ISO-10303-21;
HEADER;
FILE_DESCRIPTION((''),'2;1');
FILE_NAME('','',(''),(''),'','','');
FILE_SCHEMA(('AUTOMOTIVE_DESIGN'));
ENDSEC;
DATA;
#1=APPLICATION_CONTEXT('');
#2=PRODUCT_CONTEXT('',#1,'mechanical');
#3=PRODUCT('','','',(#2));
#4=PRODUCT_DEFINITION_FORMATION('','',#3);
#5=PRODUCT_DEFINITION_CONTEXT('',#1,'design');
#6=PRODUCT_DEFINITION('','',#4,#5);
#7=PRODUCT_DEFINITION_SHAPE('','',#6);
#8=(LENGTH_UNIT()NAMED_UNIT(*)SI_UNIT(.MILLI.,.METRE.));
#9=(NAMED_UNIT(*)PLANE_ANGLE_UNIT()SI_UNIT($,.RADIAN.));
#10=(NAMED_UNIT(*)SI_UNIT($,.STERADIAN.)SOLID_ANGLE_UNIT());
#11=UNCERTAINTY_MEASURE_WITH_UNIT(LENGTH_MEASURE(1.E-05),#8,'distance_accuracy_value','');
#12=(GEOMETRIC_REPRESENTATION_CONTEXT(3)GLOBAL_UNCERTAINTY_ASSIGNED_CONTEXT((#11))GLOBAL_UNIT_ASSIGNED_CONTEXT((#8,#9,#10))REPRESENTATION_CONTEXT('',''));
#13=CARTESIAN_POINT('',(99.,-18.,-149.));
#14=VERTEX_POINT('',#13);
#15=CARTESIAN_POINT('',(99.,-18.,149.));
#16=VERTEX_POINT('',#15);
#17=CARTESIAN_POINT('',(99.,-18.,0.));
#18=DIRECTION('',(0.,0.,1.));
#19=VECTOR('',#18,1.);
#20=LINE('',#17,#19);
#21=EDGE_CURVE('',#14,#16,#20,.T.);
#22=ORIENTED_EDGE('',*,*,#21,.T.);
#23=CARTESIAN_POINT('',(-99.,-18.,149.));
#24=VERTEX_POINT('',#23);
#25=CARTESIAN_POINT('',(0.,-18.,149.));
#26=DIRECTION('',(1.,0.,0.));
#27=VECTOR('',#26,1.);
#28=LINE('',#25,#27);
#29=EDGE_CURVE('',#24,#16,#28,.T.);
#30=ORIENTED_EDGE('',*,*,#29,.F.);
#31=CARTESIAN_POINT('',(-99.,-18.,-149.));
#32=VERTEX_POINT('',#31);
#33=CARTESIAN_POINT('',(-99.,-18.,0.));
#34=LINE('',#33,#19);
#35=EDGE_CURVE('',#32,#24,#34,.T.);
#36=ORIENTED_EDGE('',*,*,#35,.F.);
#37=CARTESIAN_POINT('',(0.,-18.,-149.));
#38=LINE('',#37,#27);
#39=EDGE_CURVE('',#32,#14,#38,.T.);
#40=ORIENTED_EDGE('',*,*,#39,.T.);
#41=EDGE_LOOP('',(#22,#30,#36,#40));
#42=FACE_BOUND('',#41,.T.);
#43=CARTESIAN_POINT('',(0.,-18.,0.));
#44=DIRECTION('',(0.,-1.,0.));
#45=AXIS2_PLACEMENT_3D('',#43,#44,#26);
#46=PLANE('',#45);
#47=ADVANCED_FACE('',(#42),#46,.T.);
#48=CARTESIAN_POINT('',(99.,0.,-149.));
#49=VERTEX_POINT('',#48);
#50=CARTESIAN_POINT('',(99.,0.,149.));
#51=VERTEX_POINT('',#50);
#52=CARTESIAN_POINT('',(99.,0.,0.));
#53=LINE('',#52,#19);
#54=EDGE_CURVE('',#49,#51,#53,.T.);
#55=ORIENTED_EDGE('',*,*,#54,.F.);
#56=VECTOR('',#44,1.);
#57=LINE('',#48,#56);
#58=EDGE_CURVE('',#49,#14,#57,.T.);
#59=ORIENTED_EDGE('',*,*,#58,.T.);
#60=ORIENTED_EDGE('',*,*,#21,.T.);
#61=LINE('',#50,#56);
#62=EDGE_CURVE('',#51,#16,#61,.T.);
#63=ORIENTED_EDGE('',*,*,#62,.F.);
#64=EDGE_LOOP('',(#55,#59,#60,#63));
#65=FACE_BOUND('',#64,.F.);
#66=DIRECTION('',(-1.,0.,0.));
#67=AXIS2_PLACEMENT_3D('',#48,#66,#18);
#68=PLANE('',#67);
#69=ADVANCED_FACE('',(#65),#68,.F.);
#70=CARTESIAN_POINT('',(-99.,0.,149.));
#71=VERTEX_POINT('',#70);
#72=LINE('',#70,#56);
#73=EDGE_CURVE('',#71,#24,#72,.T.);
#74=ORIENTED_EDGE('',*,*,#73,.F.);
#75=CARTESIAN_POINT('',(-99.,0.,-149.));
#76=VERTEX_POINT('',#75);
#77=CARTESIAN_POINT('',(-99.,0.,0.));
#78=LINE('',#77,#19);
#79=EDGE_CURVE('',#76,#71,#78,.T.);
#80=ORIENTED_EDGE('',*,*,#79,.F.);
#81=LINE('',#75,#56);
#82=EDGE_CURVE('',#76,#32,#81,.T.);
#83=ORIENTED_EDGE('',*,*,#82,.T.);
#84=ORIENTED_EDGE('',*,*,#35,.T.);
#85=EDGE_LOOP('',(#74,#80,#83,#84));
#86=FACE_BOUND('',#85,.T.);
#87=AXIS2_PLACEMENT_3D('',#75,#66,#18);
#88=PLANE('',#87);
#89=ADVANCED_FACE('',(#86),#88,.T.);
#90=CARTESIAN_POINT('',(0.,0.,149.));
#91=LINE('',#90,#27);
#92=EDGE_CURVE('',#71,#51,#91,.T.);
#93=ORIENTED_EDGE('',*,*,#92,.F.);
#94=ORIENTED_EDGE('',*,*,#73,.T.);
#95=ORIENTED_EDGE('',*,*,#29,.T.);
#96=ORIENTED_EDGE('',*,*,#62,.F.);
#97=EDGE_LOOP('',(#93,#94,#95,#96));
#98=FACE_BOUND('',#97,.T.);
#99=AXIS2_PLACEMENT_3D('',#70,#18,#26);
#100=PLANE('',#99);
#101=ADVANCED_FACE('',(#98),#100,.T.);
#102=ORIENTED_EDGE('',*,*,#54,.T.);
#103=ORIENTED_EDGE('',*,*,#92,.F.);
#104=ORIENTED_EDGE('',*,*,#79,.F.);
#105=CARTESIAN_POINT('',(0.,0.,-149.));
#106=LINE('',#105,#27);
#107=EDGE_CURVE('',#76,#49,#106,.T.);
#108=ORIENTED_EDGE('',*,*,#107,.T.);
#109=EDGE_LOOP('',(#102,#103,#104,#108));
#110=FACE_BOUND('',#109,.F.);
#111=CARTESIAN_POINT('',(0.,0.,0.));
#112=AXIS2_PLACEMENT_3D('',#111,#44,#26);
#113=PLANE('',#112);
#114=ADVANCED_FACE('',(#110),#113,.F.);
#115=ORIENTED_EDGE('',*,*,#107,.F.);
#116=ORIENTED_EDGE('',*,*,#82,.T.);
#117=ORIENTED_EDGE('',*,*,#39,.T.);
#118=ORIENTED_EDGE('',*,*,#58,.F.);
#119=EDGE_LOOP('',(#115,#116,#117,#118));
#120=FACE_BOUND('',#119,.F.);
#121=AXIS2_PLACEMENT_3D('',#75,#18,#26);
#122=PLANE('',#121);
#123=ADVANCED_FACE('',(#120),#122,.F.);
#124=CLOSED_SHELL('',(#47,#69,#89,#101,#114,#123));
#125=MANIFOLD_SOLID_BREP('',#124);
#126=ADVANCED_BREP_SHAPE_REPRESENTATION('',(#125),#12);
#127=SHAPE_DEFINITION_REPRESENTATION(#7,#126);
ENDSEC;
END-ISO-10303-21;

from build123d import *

# Parameters (mm, degrees)
F0_W     = 198
F0_H     = 298
F1_DEPTH = 18


# Not quite as in the source:
# - a feature names something its author has since deleted; it is built from what else it names


with BuildPart() as f1:
    # F0 (on Front) → F1 (new body)
    with BuildSketch(Plane.XZ):
        Rectangle(F0_W, F0_H)
    extrude(amount=F1_DEPTH)


solid = f1.part
